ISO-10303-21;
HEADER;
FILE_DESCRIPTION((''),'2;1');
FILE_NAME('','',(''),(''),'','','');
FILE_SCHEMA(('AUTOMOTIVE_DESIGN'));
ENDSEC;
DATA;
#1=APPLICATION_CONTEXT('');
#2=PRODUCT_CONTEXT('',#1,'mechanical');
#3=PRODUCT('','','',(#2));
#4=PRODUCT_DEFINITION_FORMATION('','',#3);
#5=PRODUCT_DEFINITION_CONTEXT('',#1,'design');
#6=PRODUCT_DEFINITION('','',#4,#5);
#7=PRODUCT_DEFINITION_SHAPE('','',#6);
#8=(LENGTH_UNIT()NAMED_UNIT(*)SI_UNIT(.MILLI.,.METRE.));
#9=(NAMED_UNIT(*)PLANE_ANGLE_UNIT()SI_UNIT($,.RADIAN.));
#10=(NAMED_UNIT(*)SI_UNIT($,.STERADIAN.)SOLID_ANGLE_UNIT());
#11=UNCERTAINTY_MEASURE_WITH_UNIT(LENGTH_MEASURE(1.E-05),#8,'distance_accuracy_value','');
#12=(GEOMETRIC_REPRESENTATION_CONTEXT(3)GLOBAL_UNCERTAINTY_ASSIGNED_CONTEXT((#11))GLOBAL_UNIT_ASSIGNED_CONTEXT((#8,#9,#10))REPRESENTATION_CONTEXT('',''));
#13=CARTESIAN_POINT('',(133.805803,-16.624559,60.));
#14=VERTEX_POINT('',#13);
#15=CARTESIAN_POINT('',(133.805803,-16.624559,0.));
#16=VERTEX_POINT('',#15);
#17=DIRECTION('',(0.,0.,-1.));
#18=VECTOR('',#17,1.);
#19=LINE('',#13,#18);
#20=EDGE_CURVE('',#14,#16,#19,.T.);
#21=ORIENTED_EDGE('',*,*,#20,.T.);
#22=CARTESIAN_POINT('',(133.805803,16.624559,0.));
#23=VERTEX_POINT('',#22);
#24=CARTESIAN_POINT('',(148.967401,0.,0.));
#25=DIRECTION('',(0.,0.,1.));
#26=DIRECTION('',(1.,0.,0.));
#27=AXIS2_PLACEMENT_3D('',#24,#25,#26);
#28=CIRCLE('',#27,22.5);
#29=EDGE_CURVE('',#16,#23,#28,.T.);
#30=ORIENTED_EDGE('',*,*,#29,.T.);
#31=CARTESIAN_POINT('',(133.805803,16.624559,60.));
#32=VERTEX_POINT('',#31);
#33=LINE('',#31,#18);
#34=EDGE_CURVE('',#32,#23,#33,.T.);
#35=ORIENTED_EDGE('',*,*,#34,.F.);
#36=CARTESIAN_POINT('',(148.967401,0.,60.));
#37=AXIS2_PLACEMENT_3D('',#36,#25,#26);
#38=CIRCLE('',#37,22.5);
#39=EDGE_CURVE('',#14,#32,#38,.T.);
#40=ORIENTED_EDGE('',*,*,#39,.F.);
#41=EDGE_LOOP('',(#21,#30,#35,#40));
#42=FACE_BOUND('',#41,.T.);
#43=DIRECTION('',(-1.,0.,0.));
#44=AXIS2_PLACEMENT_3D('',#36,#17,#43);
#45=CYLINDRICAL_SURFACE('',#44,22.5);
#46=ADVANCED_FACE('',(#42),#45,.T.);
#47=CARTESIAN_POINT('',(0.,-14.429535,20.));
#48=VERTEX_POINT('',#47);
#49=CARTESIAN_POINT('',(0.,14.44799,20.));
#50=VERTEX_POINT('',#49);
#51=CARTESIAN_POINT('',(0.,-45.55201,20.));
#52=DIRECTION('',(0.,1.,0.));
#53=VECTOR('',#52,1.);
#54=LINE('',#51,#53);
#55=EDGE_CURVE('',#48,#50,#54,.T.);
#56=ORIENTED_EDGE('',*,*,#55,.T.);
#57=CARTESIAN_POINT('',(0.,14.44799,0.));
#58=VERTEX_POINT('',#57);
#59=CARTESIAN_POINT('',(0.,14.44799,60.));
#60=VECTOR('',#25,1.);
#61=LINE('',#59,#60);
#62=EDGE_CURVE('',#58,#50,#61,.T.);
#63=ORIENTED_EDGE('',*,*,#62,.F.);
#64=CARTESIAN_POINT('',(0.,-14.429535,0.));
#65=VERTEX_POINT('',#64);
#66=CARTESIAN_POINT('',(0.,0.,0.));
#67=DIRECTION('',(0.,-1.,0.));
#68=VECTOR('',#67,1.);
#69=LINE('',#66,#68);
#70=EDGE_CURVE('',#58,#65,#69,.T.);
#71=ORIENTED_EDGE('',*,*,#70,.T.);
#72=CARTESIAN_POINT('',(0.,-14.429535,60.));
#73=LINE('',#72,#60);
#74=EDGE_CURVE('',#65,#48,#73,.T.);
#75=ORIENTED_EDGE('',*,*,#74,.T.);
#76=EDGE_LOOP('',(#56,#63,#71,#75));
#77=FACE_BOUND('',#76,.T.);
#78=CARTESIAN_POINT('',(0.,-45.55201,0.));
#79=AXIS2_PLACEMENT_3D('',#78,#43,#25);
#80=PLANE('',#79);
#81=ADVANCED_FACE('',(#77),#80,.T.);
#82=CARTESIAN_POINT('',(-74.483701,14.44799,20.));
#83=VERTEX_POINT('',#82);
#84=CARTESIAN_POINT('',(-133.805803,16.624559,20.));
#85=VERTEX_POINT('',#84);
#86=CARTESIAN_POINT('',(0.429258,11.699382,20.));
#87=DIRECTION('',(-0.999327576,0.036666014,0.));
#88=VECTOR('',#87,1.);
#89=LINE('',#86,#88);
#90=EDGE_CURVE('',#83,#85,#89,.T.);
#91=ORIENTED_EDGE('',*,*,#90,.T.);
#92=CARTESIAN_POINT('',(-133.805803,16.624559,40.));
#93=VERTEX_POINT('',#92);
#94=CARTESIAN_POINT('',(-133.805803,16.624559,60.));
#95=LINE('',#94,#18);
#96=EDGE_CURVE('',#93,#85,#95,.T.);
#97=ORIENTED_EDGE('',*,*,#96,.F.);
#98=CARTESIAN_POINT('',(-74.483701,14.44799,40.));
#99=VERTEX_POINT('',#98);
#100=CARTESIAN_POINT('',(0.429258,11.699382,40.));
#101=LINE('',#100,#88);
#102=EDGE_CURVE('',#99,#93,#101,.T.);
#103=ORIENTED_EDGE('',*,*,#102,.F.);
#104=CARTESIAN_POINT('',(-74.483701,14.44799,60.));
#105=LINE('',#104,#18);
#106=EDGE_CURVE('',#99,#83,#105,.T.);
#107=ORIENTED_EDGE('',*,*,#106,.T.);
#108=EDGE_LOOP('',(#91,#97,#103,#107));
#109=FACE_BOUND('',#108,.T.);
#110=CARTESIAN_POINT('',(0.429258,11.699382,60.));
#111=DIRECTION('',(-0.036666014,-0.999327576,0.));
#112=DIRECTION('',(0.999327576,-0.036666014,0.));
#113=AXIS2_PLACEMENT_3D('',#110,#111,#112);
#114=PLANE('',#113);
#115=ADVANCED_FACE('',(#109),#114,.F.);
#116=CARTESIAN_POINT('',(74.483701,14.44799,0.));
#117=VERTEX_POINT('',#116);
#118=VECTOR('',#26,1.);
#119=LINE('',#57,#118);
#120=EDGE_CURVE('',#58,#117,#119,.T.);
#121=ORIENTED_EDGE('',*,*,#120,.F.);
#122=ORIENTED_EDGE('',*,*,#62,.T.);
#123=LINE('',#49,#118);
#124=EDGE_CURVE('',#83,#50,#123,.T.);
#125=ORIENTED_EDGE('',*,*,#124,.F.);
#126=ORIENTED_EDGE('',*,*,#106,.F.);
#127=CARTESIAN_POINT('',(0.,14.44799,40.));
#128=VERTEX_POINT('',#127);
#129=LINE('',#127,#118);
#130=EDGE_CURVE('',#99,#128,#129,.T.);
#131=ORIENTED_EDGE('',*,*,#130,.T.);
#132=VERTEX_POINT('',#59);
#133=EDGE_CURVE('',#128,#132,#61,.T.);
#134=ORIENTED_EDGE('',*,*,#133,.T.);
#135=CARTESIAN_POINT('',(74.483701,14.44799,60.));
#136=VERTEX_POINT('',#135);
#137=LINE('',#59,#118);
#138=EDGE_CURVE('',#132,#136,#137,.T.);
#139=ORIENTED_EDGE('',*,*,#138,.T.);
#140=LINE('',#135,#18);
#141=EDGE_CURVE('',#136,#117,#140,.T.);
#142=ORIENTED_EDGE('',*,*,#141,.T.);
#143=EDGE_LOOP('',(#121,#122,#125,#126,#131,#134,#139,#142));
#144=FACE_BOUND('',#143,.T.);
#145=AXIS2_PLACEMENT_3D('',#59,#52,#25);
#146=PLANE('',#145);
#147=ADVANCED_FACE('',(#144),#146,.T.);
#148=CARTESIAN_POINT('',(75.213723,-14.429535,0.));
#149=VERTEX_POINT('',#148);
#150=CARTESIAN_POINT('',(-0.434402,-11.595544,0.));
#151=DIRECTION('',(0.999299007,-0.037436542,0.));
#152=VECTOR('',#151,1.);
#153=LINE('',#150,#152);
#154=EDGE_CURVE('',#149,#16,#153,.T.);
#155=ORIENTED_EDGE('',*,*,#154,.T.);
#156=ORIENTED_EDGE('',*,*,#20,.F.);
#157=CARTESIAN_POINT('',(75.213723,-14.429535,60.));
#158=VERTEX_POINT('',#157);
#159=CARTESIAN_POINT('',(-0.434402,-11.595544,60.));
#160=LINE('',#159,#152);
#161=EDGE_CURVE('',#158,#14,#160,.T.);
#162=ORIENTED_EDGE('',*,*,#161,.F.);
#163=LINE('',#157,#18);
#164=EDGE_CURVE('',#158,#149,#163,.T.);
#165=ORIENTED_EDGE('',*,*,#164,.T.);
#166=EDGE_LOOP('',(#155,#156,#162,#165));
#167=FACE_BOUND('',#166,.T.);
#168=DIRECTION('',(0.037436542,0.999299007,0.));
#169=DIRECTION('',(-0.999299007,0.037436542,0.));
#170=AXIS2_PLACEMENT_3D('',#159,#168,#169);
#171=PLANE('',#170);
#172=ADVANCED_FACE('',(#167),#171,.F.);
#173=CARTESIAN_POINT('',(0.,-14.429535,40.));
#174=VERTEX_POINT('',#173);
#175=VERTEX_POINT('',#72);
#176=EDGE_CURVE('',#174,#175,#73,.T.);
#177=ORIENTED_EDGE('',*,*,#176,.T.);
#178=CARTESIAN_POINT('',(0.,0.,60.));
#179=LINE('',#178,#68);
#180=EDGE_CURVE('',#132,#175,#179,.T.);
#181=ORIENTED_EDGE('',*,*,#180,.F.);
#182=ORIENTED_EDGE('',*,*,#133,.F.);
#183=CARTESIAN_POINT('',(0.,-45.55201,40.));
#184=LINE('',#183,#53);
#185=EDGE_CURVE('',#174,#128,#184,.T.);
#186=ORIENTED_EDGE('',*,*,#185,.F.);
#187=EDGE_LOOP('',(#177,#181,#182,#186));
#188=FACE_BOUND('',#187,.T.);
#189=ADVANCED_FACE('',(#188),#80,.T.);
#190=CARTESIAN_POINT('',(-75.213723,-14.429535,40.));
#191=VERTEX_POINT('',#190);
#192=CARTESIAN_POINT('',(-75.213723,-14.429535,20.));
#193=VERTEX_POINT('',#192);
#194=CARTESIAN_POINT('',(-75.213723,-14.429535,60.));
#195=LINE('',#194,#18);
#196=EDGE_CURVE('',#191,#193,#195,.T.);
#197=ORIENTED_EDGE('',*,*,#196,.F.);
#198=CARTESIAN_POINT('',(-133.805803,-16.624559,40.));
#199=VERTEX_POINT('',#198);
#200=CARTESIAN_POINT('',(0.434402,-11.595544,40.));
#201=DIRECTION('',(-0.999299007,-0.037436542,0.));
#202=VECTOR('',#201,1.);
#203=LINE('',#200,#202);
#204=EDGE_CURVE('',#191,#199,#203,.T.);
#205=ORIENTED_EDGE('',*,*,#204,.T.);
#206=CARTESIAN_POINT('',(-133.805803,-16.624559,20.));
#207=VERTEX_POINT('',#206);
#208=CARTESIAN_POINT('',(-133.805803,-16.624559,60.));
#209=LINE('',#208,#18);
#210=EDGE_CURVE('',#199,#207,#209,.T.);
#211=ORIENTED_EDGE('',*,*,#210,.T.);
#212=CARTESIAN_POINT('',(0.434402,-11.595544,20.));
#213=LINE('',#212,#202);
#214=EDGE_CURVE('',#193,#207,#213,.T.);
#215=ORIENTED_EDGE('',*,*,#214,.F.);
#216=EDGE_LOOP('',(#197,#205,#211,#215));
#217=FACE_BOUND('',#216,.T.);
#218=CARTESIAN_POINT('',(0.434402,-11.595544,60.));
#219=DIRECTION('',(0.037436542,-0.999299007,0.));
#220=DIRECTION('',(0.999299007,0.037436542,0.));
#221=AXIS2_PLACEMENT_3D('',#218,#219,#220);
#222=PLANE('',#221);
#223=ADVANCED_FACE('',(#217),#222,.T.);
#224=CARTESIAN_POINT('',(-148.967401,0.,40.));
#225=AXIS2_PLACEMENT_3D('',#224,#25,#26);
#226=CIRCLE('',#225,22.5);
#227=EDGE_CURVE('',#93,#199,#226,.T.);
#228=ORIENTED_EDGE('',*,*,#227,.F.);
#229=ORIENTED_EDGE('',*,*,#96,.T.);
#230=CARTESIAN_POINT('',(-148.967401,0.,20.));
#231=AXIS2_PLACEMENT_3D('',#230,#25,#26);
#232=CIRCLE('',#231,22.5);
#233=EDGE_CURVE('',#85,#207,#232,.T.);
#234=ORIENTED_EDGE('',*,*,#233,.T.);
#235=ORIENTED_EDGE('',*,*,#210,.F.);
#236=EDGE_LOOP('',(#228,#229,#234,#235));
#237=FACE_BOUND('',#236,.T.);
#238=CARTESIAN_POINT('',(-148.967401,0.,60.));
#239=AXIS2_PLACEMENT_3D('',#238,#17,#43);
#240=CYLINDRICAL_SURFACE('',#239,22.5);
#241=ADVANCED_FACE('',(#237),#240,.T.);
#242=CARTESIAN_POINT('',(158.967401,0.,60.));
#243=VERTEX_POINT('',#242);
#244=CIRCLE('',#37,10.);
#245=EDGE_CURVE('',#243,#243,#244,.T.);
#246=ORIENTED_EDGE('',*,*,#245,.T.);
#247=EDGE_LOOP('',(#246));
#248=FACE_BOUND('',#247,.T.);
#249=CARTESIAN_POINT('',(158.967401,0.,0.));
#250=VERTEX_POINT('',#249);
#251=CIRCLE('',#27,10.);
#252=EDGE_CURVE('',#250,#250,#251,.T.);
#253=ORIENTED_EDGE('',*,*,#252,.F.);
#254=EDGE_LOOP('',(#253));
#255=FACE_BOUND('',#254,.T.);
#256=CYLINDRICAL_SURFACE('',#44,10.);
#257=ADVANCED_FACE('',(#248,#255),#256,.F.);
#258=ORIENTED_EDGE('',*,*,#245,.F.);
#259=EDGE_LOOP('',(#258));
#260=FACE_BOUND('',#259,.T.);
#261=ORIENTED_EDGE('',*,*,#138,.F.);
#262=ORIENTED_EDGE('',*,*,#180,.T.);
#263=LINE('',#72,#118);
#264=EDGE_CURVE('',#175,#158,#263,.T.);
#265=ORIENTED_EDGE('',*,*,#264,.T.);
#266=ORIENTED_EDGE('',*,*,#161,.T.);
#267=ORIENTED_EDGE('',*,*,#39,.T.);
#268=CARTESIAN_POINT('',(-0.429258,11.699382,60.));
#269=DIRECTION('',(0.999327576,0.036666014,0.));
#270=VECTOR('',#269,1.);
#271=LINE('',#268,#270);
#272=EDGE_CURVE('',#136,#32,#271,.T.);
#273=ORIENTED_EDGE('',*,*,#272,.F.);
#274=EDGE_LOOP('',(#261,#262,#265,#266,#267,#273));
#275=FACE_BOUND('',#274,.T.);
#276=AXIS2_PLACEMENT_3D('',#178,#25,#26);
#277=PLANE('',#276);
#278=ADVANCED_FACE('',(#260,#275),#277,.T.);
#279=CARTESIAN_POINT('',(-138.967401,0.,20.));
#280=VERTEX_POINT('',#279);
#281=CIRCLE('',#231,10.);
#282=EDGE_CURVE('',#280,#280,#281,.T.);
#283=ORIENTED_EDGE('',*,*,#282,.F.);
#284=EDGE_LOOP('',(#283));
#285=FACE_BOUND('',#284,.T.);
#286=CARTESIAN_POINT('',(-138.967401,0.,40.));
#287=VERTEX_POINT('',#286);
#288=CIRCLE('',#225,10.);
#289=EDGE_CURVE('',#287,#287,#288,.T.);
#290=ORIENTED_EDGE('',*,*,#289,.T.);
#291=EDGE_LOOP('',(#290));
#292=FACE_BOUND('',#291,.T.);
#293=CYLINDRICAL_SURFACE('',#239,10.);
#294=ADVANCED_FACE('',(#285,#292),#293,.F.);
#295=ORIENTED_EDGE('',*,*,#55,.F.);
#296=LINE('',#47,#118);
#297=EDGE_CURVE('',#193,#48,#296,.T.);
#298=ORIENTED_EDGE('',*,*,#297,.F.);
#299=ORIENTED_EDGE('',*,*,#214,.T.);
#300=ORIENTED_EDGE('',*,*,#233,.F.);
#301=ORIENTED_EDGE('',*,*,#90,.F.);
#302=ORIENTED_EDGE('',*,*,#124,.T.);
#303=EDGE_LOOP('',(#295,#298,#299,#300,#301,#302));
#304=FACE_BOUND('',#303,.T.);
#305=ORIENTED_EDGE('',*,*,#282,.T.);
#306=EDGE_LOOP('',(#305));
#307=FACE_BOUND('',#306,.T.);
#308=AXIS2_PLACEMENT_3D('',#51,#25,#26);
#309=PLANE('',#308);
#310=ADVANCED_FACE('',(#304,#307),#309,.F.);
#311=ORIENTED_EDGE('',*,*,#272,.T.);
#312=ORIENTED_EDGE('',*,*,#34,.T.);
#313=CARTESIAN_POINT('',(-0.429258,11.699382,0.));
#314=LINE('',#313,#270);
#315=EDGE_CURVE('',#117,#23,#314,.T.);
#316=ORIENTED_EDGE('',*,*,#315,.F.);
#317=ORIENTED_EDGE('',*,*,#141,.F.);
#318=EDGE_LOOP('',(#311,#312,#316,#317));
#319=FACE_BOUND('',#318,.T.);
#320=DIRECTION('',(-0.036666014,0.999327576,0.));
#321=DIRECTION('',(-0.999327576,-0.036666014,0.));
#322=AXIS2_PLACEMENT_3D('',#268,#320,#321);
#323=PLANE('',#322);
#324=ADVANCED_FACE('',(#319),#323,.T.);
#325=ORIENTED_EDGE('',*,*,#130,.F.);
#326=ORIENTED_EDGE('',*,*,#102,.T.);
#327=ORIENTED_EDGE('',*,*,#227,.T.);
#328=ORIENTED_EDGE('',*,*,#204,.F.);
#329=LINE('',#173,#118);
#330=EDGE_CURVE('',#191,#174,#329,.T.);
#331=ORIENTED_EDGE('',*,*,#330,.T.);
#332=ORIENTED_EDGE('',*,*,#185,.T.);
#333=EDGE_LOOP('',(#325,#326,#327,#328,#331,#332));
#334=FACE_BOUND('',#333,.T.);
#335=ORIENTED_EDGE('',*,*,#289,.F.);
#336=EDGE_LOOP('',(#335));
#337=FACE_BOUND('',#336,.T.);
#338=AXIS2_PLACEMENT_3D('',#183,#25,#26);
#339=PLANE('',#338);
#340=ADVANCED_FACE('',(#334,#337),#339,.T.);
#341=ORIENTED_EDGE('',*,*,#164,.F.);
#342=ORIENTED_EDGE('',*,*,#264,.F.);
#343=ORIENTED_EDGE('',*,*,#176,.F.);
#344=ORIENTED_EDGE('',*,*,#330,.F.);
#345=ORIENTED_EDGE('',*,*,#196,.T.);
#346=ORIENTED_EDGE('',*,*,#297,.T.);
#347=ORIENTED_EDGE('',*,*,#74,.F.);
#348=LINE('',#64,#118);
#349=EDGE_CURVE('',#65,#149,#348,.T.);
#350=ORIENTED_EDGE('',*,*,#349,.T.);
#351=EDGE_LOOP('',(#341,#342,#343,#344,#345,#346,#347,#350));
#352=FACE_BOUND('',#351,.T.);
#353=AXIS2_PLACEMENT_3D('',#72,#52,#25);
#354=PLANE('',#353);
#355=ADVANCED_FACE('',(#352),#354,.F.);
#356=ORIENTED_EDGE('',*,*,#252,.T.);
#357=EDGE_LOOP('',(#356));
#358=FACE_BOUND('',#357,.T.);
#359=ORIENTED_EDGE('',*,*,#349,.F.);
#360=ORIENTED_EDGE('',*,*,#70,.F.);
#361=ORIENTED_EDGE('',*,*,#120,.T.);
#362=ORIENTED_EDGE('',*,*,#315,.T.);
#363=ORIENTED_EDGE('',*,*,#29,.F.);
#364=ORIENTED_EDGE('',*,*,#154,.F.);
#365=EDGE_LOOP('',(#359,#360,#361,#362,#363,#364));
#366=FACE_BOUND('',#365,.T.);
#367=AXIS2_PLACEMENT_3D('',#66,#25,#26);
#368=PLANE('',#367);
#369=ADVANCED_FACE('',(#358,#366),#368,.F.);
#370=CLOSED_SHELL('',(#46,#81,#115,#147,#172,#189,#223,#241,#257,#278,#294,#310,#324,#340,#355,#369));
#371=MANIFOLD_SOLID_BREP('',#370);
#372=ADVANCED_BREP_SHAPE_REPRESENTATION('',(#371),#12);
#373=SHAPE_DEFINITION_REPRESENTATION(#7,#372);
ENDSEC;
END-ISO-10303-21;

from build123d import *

# Parameters (mm, degrees)
SKETCH1_R              = 22.5
SKETCH1_R_2            = 10
BOSS_EXTRUDE1_DEPTH    = 60
CUT_EXTRUDE1_START     = -36.947990214
CUT_EXTRUDE1_OUTLINE_W = 173
CUT_EXTRUDE1_OUTLINE_H = 20
CUT_EXTRUDE1_DEPTH     = 45


# Read off the part's stored shape, not the designer's step: Cut-Extrude1
with BuildPart() as part:
    # Sketch1 → Boss-Extrude1 (new body)
    # profile 1 of 3: a face of its own
    with BuildSketch(Plane.XY):
        with Locations((-148.967401035, 0)):
            Circle(SKETCH1_R)
        with Locations((-148.967401035, 0)):
            Circle(SKETCH1_R_2, mode=Mode.SUBTRACT)
    # profile 2 of 3: a face of its own
    with BuildSketch(Plane.XY):
        with BuildLine():
            Line((-133.805803377, -16.624558835), (-75.213723302, -14.429535265))
            Line((-75.213723302, -14.429535265), (0, -14.429535265))
            Line((0, -14.429535265), (75.213723302, -14.429535265))
            Line((75.213723302, -14.429535265), (133.805803377, -16.624558835))
            ThreePointArc((133.805803377, -16.624558835), (126.467401035, 0), (133.805803377, 16.624558835))
            Line((133.805803377, 16.624558835), (74.483700517, 14.447990214))
            Line((74.483700517, 14.447990214), (0, 14.447990214))
            Line((0, 14.447990214), (-74.483700517, 14.447990214))
            Line((-74.483700517, 14.447990214), (-133.805803377, 16.624558835))
            ThreePointArc((-133.805803377, 16.624558835), (-128.383597362, 9.086089717), (-126.467401035, 0))
            ThreePointArc((-126.467401035, 0), (-128.383597362, -9.086089717), (-133.805803377, -16.624558835))
        make_face()
    # profile 3 of 3: a face of its own
    with BuildSketch(Plane.XY):
        with Locations((148.967401035, 0)):
            Circle(SKETCH1_R)
        with Locations((148.967401035, 0)):
            Circle(SKETCH1_R_2, mode=Mode.SUBTRACT)
    extrude(amount=BOSS_EXTRUDE1_DEPTH)

    # Cut-Extrude1 outline → Cut-Extrude1 (cut)
    with BuildSketch(Plane(origin=(0, 14.447990214, 0), x_dir=(1, 0, 0), z_dir=(0, 1, 0)).offset(CUT_EXTRUDE1_START)):
        with Locations((-86.5, -10)):
            Rectangle(CUT_EXTRUDE1_OUTLINE_W, CUT_EXTRUDE1_OUTLINE_H)
        with Locations((-86.5, -50)):
            Rectangle(CUT_EXTRUDE1_OUTLINE_W, CUT_EXTRUDE1_OUTLINE_H)
    extrude(amount=CUT_EXTRUDE1_DEPTH, mode=Mode.SUBTRACT)


solid = part.part
